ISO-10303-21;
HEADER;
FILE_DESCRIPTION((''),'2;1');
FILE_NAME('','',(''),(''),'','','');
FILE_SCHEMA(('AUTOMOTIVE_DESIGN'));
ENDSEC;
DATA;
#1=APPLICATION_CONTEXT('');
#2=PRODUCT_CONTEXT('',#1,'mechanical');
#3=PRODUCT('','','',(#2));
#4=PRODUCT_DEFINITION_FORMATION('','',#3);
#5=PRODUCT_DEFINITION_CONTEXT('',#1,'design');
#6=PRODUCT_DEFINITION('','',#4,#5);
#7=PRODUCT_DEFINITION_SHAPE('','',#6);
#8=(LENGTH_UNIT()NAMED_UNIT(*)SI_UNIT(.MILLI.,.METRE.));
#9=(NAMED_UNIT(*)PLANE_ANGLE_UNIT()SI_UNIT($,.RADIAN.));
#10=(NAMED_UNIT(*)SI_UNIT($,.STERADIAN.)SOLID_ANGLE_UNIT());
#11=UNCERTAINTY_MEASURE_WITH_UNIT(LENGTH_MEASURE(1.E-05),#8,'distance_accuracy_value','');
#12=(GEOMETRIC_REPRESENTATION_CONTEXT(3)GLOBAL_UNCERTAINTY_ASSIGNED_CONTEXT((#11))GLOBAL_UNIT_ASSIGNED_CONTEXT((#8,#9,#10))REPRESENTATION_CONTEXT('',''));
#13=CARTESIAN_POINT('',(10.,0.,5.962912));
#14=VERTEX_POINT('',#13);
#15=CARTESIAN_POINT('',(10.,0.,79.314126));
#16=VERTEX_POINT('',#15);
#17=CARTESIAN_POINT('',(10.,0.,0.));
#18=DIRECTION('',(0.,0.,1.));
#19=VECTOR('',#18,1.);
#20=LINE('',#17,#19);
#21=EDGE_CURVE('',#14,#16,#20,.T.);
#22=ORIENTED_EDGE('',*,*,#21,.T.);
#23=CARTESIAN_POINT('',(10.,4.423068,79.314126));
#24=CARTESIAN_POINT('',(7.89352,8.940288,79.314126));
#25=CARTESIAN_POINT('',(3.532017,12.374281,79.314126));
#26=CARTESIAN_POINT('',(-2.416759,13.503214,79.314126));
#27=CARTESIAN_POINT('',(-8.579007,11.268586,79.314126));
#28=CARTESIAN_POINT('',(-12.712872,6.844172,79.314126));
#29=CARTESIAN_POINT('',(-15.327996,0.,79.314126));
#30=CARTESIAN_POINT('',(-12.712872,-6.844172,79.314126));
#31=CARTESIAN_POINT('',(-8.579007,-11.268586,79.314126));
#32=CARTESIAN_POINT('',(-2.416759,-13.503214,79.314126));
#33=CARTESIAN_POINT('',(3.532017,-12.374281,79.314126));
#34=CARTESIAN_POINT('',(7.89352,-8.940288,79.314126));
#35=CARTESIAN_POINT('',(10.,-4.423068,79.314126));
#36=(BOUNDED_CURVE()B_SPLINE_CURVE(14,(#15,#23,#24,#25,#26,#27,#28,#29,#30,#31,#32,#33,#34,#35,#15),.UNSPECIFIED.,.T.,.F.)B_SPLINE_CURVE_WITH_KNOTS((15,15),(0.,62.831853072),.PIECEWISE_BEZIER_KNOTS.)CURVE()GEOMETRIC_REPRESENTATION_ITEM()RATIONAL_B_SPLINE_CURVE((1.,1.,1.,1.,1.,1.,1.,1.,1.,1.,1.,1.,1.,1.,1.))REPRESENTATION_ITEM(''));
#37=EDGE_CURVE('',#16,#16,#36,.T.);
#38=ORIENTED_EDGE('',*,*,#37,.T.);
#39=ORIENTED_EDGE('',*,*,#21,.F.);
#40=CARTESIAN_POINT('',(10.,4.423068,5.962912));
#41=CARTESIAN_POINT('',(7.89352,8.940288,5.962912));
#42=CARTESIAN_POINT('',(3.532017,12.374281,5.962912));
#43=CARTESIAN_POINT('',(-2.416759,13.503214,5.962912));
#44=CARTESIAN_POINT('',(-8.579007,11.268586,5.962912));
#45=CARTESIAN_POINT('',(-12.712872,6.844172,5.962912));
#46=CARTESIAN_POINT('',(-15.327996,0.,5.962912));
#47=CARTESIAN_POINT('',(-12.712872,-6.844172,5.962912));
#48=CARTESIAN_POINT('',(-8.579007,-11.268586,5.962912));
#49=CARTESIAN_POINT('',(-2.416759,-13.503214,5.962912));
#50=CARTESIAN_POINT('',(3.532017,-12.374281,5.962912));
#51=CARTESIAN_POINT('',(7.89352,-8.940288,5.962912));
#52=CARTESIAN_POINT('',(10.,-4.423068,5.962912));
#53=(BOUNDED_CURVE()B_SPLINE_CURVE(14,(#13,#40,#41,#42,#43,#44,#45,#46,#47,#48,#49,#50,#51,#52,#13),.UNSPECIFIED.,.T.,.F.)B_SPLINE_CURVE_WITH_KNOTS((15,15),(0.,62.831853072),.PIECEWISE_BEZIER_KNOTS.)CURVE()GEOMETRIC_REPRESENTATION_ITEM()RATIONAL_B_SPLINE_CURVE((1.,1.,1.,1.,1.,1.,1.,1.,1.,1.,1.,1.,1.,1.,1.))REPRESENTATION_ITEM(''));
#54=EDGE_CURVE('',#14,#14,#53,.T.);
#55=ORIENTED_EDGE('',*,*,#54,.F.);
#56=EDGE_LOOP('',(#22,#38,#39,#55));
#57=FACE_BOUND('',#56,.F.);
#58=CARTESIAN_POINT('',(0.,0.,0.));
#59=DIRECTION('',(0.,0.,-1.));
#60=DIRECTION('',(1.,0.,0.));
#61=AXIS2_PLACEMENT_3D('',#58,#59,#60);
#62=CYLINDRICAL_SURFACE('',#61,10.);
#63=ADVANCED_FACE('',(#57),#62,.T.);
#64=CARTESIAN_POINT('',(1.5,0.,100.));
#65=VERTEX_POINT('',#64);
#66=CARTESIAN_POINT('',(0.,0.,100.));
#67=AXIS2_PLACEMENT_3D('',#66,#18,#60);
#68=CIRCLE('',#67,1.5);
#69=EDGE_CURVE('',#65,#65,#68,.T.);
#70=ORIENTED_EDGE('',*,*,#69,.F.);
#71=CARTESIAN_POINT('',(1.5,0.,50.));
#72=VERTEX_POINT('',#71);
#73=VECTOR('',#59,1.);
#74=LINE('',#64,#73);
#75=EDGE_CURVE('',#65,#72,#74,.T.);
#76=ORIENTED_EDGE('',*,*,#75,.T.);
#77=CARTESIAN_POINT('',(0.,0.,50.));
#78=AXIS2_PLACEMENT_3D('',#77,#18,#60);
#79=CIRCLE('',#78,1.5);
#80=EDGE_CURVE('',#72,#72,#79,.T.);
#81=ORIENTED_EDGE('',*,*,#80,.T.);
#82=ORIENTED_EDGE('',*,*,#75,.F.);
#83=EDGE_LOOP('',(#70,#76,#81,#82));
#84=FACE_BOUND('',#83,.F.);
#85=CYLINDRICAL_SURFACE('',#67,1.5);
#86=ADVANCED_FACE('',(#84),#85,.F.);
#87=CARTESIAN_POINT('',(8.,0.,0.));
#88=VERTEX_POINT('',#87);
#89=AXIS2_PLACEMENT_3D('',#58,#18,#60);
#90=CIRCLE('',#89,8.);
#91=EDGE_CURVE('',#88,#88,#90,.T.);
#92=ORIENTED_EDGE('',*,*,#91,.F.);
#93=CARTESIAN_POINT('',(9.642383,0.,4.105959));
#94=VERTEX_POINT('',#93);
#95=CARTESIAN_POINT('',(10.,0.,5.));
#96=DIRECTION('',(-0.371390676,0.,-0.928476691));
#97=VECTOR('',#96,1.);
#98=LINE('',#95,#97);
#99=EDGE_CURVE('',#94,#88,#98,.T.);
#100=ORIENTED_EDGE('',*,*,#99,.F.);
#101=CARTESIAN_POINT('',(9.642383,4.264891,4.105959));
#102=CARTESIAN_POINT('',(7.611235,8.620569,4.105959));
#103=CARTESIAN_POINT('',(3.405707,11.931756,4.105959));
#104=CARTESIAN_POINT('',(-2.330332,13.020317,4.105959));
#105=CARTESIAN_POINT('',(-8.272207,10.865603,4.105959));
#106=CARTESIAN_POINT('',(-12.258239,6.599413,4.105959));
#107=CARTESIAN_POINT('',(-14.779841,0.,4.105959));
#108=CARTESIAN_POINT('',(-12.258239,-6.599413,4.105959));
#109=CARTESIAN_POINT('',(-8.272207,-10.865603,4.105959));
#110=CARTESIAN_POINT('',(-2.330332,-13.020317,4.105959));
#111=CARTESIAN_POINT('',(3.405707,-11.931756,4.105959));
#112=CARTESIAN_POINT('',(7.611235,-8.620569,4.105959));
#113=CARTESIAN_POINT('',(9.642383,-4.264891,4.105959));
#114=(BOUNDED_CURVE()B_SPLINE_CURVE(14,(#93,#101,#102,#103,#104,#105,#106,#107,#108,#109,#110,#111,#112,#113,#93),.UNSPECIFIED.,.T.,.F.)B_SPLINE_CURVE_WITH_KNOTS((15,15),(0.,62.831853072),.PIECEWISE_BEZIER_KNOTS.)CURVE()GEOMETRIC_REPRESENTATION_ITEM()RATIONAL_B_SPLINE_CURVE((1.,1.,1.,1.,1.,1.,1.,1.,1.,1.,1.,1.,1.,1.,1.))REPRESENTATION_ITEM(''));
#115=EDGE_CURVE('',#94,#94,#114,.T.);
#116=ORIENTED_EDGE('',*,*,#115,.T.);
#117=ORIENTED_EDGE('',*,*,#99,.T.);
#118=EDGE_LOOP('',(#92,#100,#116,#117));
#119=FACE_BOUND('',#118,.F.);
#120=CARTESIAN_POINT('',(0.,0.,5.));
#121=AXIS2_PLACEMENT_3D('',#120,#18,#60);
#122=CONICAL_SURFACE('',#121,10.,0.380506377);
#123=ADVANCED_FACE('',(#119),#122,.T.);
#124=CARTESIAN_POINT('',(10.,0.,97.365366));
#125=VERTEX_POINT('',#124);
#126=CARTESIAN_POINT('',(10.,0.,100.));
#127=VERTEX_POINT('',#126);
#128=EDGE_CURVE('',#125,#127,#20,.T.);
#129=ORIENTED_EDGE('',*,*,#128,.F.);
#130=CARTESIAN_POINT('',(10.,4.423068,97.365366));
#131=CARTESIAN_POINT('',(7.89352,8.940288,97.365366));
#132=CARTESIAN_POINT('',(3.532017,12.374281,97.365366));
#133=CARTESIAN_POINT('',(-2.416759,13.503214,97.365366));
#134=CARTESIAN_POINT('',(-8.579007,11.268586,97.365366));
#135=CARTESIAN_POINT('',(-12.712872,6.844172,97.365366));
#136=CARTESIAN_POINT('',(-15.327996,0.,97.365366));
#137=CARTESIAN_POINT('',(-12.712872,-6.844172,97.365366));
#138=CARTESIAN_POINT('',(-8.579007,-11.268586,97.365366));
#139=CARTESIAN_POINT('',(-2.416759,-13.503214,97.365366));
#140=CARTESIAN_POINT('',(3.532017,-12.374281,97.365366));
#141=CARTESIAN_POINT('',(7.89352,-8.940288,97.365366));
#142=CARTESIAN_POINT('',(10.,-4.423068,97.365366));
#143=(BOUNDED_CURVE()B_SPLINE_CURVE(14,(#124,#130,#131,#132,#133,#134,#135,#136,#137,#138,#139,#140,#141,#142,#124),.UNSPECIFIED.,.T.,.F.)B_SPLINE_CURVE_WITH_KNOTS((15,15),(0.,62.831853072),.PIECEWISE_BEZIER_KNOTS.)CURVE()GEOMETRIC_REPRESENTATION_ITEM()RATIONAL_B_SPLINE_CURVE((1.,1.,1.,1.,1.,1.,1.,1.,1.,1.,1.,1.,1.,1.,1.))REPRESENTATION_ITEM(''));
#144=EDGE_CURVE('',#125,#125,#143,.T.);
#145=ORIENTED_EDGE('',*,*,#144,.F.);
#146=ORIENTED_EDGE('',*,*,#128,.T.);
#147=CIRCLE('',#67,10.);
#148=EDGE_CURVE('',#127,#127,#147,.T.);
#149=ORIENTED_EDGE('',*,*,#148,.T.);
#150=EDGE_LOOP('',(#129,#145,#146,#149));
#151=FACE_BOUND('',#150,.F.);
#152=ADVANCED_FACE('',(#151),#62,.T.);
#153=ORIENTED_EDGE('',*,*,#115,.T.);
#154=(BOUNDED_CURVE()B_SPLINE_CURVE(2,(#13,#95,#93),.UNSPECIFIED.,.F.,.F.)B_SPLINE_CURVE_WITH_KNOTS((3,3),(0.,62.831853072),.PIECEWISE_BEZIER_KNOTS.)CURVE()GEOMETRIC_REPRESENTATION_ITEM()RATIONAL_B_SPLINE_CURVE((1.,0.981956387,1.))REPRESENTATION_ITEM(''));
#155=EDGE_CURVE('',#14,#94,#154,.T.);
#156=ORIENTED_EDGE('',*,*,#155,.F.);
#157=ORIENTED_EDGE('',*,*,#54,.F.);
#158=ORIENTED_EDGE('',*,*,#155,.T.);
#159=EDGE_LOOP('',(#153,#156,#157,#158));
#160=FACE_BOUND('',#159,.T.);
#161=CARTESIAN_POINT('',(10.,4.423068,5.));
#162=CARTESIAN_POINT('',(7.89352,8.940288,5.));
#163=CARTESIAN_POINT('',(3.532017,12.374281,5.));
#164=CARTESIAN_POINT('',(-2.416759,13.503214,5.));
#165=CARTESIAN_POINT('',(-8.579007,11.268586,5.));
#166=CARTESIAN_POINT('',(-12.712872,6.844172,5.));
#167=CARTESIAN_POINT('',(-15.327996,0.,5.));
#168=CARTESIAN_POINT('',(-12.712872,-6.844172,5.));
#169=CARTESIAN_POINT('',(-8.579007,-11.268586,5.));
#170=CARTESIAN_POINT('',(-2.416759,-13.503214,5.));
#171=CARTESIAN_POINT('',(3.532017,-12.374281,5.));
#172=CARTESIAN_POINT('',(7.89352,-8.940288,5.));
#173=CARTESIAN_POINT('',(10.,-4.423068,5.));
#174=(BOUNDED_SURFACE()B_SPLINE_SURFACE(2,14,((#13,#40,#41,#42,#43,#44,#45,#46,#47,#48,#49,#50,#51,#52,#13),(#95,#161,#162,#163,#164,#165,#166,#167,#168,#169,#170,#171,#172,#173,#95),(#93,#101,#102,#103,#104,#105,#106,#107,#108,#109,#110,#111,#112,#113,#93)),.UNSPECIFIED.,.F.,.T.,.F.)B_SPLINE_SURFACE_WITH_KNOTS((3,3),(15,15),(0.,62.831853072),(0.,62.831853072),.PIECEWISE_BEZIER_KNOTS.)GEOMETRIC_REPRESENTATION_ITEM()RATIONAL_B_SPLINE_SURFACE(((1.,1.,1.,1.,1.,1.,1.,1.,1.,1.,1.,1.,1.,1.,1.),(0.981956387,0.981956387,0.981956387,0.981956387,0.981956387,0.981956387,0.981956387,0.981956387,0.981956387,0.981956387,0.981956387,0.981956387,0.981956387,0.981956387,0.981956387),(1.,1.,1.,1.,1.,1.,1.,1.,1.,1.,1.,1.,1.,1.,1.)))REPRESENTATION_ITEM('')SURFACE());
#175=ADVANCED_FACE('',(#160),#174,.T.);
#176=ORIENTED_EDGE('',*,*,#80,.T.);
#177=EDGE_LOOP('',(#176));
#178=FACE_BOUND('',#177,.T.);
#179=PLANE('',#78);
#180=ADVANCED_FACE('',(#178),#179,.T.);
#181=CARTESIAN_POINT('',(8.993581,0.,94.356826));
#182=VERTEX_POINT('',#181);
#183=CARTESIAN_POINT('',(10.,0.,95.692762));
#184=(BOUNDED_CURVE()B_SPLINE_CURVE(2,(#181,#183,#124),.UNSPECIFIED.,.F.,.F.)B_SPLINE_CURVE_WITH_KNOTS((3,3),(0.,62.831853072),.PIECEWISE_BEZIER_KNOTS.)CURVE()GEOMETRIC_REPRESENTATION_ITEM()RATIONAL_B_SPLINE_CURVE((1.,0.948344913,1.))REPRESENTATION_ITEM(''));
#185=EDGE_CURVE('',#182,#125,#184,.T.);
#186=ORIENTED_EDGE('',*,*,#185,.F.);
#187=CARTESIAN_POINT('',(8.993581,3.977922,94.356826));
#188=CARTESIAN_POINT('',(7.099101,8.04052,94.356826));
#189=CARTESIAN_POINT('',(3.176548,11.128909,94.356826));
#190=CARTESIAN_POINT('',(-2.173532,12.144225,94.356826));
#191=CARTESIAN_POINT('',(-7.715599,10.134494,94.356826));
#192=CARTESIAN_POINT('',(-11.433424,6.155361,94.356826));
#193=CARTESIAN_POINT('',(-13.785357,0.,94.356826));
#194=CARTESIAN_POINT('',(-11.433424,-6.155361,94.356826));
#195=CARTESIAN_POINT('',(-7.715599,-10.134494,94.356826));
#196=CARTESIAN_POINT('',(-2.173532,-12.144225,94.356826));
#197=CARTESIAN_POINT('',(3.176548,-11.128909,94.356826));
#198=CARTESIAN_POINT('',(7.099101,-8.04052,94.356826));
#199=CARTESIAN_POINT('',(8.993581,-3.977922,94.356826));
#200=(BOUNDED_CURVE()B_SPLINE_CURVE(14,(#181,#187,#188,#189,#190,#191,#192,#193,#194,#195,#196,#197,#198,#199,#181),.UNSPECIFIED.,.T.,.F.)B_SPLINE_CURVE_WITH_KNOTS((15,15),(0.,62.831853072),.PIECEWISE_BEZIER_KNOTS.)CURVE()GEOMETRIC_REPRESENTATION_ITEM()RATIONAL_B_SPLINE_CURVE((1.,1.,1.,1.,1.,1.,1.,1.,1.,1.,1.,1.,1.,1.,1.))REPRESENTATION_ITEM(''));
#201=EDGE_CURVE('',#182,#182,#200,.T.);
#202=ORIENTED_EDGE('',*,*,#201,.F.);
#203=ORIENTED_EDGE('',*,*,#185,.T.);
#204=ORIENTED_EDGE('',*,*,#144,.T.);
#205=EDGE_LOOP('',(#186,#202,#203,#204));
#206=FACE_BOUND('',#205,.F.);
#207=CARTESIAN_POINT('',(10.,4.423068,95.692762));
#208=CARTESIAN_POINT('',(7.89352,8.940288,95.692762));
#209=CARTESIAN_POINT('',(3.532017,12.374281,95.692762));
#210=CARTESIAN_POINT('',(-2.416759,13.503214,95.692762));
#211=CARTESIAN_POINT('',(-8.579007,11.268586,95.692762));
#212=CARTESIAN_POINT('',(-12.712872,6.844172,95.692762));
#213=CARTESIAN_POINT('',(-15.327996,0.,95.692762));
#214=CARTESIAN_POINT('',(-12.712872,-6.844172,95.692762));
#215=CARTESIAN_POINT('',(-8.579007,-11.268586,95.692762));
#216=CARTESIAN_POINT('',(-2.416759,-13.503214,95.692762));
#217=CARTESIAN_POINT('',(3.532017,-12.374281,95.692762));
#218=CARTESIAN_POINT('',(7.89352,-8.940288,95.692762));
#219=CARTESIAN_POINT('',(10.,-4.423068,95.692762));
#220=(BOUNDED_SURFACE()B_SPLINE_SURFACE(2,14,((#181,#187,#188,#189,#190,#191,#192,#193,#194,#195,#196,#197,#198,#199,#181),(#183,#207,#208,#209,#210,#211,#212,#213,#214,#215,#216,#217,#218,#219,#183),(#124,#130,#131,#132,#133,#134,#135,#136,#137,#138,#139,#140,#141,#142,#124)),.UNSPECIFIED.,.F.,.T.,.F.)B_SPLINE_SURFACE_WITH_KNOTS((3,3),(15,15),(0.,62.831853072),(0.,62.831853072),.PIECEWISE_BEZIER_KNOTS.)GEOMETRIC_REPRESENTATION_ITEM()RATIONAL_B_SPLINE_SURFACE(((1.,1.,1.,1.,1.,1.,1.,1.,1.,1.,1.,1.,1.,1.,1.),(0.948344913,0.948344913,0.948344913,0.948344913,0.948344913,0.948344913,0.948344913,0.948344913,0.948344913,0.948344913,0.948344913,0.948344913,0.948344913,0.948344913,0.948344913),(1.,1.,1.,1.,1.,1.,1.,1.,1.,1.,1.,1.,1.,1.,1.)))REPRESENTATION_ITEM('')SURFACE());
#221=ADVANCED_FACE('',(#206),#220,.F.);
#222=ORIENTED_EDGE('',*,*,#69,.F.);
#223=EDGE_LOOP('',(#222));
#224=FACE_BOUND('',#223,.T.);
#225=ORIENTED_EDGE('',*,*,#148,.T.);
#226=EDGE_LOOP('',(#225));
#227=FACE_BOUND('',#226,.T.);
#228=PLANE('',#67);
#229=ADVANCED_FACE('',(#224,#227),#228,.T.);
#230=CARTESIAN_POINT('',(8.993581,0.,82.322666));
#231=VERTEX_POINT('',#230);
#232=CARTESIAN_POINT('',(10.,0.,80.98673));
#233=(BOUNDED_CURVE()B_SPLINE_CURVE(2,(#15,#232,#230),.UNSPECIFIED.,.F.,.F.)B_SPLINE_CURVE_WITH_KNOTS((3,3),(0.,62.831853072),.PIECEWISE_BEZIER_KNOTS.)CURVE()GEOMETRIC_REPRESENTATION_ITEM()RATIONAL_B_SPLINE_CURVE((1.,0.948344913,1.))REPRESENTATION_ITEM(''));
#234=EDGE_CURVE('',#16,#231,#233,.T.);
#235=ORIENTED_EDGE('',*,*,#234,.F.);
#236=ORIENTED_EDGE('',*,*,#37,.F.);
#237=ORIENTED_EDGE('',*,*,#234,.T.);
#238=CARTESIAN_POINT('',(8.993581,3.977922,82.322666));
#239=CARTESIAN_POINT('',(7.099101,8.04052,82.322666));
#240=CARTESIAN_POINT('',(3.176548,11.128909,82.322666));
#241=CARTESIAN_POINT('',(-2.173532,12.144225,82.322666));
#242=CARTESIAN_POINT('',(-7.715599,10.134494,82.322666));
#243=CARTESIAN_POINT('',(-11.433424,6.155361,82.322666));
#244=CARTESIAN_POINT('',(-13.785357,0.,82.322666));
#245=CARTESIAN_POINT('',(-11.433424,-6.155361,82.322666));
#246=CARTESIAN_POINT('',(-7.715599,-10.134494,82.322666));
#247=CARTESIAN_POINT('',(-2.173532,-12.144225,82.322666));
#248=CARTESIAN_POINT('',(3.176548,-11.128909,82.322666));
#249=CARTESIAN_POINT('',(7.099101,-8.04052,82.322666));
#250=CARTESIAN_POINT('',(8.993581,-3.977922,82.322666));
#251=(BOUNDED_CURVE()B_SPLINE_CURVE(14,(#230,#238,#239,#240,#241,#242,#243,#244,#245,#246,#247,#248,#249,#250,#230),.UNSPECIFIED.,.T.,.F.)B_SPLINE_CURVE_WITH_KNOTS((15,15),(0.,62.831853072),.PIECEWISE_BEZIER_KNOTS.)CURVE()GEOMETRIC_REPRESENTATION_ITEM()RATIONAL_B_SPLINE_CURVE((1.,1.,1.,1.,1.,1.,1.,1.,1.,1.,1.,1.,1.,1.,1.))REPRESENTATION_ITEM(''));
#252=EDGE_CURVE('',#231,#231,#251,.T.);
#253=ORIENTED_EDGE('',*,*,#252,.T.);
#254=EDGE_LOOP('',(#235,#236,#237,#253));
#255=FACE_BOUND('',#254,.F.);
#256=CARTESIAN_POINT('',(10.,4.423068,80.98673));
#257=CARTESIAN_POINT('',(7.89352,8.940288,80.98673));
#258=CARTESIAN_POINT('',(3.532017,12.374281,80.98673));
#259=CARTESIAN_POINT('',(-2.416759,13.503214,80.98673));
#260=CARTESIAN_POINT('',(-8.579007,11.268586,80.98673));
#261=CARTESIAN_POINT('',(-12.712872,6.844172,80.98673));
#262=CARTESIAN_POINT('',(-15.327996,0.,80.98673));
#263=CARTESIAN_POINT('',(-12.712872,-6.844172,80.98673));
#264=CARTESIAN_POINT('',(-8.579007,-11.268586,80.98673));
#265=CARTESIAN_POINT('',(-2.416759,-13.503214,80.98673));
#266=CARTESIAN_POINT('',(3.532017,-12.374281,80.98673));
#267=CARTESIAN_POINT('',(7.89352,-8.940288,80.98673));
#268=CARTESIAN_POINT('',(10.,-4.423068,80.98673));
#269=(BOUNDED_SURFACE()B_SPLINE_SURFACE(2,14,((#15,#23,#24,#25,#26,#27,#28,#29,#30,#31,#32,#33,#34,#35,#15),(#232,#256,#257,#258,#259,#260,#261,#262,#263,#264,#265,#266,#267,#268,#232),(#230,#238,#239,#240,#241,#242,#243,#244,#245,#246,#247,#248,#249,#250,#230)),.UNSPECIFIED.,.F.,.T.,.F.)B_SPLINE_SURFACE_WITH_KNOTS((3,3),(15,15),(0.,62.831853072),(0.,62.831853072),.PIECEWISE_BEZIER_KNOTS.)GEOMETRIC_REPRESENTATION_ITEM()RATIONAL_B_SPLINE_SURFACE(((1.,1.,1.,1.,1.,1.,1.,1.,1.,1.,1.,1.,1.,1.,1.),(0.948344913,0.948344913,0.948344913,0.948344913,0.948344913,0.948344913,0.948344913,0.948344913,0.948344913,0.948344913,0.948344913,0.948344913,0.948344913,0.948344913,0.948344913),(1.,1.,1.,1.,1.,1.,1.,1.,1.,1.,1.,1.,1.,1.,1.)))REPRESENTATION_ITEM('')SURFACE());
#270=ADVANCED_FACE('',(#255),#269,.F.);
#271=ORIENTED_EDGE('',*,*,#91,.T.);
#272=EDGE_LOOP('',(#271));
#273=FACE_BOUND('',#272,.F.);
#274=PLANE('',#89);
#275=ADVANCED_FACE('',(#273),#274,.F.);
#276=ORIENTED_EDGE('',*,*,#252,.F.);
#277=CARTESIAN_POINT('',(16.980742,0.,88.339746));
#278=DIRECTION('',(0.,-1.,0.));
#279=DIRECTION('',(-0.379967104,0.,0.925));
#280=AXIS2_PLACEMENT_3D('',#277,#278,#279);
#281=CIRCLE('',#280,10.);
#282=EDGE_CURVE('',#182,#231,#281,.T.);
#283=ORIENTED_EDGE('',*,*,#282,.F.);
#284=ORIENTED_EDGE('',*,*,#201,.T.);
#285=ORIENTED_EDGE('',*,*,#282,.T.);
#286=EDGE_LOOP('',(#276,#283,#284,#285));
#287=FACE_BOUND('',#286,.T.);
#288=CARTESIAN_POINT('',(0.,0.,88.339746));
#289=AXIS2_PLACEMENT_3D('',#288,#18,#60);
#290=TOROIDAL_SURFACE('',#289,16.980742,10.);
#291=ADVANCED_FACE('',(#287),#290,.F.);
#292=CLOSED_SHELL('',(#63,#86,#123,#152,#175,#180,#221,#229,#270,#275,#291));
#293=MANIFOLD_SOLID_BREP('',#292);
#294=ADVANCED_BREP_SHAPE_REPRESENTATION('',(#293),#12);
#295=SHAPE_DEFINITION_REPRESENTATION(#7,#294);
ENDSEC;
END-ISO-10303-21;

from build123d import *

# Parameters (mm, degrees)
F2_R     = 10
F3_DEPTH = 100
F4_SIZE2 = 2
F4_SIZE  = 5
F5_R     = 1.5
F6_DEPTH = 50
F9_R     = 5
F10_R    = 5


# Not quite as in the source:
# - two fillets or chamfers of one size are made in one step


with BuildPart() as f3:
    # F2 (on Top) → F3 (new body)
    with BuildSketch(Plane.XY):
        Circle(F2_R)
    extrude(amount=F3_DEPTH)

    # F4
    f4_edges = [f3.edges().sort_by_distance(p)[0] for p in [
        (-10, 0, 0),
    ]]
    f4_side = f3.faces().sort_by_distance((-10, 0, 50))[0]
    chamfer(f4_edges, length=F4_SIZE, length2=F4_SIZE2, reference=f4_side)

    # F5 (on face) → F6 (cut)
    with BuildSketch(Plane.XY.offset(100)):
        Circle(F5_R)
    extrude(amount=-F6_DEPTH, mode=Mode.SUBTRACT)

    # F7 (on Front) → F8 (revolve, cut)
    with BuildSketch(Plane.XZ):
        with BuildLine():
            Line((13.1810711939, 79.0897459622), (13.1810711939, 97.5897459622))
            ThreePointArc((13.1810711939, 97.5897459622), (6.9807422323, 88.3397459622), (13.1810711939, 79.0897459622))
        make_face()
    revolve(axis=Axis((0, 0, 50), (0, 0, -1)), mode=Mode.SUBTRACT)

    # F9
    f9_edges = [f3.edges().sort_by_distance(p)[0] for p in [
        (-10, 0, 81.179492),
    ]]
    fillet(f9_edges, radius=F9_R)

    # F10
    f10_edges = [f3.edges().sort_by_distance(p)[0] for p in [
        (-10, 0, 5),
        (-10, 0, 95.5),
    ]]
    fillet(f10_edges, radius=F10_R)


solid = f3.part
